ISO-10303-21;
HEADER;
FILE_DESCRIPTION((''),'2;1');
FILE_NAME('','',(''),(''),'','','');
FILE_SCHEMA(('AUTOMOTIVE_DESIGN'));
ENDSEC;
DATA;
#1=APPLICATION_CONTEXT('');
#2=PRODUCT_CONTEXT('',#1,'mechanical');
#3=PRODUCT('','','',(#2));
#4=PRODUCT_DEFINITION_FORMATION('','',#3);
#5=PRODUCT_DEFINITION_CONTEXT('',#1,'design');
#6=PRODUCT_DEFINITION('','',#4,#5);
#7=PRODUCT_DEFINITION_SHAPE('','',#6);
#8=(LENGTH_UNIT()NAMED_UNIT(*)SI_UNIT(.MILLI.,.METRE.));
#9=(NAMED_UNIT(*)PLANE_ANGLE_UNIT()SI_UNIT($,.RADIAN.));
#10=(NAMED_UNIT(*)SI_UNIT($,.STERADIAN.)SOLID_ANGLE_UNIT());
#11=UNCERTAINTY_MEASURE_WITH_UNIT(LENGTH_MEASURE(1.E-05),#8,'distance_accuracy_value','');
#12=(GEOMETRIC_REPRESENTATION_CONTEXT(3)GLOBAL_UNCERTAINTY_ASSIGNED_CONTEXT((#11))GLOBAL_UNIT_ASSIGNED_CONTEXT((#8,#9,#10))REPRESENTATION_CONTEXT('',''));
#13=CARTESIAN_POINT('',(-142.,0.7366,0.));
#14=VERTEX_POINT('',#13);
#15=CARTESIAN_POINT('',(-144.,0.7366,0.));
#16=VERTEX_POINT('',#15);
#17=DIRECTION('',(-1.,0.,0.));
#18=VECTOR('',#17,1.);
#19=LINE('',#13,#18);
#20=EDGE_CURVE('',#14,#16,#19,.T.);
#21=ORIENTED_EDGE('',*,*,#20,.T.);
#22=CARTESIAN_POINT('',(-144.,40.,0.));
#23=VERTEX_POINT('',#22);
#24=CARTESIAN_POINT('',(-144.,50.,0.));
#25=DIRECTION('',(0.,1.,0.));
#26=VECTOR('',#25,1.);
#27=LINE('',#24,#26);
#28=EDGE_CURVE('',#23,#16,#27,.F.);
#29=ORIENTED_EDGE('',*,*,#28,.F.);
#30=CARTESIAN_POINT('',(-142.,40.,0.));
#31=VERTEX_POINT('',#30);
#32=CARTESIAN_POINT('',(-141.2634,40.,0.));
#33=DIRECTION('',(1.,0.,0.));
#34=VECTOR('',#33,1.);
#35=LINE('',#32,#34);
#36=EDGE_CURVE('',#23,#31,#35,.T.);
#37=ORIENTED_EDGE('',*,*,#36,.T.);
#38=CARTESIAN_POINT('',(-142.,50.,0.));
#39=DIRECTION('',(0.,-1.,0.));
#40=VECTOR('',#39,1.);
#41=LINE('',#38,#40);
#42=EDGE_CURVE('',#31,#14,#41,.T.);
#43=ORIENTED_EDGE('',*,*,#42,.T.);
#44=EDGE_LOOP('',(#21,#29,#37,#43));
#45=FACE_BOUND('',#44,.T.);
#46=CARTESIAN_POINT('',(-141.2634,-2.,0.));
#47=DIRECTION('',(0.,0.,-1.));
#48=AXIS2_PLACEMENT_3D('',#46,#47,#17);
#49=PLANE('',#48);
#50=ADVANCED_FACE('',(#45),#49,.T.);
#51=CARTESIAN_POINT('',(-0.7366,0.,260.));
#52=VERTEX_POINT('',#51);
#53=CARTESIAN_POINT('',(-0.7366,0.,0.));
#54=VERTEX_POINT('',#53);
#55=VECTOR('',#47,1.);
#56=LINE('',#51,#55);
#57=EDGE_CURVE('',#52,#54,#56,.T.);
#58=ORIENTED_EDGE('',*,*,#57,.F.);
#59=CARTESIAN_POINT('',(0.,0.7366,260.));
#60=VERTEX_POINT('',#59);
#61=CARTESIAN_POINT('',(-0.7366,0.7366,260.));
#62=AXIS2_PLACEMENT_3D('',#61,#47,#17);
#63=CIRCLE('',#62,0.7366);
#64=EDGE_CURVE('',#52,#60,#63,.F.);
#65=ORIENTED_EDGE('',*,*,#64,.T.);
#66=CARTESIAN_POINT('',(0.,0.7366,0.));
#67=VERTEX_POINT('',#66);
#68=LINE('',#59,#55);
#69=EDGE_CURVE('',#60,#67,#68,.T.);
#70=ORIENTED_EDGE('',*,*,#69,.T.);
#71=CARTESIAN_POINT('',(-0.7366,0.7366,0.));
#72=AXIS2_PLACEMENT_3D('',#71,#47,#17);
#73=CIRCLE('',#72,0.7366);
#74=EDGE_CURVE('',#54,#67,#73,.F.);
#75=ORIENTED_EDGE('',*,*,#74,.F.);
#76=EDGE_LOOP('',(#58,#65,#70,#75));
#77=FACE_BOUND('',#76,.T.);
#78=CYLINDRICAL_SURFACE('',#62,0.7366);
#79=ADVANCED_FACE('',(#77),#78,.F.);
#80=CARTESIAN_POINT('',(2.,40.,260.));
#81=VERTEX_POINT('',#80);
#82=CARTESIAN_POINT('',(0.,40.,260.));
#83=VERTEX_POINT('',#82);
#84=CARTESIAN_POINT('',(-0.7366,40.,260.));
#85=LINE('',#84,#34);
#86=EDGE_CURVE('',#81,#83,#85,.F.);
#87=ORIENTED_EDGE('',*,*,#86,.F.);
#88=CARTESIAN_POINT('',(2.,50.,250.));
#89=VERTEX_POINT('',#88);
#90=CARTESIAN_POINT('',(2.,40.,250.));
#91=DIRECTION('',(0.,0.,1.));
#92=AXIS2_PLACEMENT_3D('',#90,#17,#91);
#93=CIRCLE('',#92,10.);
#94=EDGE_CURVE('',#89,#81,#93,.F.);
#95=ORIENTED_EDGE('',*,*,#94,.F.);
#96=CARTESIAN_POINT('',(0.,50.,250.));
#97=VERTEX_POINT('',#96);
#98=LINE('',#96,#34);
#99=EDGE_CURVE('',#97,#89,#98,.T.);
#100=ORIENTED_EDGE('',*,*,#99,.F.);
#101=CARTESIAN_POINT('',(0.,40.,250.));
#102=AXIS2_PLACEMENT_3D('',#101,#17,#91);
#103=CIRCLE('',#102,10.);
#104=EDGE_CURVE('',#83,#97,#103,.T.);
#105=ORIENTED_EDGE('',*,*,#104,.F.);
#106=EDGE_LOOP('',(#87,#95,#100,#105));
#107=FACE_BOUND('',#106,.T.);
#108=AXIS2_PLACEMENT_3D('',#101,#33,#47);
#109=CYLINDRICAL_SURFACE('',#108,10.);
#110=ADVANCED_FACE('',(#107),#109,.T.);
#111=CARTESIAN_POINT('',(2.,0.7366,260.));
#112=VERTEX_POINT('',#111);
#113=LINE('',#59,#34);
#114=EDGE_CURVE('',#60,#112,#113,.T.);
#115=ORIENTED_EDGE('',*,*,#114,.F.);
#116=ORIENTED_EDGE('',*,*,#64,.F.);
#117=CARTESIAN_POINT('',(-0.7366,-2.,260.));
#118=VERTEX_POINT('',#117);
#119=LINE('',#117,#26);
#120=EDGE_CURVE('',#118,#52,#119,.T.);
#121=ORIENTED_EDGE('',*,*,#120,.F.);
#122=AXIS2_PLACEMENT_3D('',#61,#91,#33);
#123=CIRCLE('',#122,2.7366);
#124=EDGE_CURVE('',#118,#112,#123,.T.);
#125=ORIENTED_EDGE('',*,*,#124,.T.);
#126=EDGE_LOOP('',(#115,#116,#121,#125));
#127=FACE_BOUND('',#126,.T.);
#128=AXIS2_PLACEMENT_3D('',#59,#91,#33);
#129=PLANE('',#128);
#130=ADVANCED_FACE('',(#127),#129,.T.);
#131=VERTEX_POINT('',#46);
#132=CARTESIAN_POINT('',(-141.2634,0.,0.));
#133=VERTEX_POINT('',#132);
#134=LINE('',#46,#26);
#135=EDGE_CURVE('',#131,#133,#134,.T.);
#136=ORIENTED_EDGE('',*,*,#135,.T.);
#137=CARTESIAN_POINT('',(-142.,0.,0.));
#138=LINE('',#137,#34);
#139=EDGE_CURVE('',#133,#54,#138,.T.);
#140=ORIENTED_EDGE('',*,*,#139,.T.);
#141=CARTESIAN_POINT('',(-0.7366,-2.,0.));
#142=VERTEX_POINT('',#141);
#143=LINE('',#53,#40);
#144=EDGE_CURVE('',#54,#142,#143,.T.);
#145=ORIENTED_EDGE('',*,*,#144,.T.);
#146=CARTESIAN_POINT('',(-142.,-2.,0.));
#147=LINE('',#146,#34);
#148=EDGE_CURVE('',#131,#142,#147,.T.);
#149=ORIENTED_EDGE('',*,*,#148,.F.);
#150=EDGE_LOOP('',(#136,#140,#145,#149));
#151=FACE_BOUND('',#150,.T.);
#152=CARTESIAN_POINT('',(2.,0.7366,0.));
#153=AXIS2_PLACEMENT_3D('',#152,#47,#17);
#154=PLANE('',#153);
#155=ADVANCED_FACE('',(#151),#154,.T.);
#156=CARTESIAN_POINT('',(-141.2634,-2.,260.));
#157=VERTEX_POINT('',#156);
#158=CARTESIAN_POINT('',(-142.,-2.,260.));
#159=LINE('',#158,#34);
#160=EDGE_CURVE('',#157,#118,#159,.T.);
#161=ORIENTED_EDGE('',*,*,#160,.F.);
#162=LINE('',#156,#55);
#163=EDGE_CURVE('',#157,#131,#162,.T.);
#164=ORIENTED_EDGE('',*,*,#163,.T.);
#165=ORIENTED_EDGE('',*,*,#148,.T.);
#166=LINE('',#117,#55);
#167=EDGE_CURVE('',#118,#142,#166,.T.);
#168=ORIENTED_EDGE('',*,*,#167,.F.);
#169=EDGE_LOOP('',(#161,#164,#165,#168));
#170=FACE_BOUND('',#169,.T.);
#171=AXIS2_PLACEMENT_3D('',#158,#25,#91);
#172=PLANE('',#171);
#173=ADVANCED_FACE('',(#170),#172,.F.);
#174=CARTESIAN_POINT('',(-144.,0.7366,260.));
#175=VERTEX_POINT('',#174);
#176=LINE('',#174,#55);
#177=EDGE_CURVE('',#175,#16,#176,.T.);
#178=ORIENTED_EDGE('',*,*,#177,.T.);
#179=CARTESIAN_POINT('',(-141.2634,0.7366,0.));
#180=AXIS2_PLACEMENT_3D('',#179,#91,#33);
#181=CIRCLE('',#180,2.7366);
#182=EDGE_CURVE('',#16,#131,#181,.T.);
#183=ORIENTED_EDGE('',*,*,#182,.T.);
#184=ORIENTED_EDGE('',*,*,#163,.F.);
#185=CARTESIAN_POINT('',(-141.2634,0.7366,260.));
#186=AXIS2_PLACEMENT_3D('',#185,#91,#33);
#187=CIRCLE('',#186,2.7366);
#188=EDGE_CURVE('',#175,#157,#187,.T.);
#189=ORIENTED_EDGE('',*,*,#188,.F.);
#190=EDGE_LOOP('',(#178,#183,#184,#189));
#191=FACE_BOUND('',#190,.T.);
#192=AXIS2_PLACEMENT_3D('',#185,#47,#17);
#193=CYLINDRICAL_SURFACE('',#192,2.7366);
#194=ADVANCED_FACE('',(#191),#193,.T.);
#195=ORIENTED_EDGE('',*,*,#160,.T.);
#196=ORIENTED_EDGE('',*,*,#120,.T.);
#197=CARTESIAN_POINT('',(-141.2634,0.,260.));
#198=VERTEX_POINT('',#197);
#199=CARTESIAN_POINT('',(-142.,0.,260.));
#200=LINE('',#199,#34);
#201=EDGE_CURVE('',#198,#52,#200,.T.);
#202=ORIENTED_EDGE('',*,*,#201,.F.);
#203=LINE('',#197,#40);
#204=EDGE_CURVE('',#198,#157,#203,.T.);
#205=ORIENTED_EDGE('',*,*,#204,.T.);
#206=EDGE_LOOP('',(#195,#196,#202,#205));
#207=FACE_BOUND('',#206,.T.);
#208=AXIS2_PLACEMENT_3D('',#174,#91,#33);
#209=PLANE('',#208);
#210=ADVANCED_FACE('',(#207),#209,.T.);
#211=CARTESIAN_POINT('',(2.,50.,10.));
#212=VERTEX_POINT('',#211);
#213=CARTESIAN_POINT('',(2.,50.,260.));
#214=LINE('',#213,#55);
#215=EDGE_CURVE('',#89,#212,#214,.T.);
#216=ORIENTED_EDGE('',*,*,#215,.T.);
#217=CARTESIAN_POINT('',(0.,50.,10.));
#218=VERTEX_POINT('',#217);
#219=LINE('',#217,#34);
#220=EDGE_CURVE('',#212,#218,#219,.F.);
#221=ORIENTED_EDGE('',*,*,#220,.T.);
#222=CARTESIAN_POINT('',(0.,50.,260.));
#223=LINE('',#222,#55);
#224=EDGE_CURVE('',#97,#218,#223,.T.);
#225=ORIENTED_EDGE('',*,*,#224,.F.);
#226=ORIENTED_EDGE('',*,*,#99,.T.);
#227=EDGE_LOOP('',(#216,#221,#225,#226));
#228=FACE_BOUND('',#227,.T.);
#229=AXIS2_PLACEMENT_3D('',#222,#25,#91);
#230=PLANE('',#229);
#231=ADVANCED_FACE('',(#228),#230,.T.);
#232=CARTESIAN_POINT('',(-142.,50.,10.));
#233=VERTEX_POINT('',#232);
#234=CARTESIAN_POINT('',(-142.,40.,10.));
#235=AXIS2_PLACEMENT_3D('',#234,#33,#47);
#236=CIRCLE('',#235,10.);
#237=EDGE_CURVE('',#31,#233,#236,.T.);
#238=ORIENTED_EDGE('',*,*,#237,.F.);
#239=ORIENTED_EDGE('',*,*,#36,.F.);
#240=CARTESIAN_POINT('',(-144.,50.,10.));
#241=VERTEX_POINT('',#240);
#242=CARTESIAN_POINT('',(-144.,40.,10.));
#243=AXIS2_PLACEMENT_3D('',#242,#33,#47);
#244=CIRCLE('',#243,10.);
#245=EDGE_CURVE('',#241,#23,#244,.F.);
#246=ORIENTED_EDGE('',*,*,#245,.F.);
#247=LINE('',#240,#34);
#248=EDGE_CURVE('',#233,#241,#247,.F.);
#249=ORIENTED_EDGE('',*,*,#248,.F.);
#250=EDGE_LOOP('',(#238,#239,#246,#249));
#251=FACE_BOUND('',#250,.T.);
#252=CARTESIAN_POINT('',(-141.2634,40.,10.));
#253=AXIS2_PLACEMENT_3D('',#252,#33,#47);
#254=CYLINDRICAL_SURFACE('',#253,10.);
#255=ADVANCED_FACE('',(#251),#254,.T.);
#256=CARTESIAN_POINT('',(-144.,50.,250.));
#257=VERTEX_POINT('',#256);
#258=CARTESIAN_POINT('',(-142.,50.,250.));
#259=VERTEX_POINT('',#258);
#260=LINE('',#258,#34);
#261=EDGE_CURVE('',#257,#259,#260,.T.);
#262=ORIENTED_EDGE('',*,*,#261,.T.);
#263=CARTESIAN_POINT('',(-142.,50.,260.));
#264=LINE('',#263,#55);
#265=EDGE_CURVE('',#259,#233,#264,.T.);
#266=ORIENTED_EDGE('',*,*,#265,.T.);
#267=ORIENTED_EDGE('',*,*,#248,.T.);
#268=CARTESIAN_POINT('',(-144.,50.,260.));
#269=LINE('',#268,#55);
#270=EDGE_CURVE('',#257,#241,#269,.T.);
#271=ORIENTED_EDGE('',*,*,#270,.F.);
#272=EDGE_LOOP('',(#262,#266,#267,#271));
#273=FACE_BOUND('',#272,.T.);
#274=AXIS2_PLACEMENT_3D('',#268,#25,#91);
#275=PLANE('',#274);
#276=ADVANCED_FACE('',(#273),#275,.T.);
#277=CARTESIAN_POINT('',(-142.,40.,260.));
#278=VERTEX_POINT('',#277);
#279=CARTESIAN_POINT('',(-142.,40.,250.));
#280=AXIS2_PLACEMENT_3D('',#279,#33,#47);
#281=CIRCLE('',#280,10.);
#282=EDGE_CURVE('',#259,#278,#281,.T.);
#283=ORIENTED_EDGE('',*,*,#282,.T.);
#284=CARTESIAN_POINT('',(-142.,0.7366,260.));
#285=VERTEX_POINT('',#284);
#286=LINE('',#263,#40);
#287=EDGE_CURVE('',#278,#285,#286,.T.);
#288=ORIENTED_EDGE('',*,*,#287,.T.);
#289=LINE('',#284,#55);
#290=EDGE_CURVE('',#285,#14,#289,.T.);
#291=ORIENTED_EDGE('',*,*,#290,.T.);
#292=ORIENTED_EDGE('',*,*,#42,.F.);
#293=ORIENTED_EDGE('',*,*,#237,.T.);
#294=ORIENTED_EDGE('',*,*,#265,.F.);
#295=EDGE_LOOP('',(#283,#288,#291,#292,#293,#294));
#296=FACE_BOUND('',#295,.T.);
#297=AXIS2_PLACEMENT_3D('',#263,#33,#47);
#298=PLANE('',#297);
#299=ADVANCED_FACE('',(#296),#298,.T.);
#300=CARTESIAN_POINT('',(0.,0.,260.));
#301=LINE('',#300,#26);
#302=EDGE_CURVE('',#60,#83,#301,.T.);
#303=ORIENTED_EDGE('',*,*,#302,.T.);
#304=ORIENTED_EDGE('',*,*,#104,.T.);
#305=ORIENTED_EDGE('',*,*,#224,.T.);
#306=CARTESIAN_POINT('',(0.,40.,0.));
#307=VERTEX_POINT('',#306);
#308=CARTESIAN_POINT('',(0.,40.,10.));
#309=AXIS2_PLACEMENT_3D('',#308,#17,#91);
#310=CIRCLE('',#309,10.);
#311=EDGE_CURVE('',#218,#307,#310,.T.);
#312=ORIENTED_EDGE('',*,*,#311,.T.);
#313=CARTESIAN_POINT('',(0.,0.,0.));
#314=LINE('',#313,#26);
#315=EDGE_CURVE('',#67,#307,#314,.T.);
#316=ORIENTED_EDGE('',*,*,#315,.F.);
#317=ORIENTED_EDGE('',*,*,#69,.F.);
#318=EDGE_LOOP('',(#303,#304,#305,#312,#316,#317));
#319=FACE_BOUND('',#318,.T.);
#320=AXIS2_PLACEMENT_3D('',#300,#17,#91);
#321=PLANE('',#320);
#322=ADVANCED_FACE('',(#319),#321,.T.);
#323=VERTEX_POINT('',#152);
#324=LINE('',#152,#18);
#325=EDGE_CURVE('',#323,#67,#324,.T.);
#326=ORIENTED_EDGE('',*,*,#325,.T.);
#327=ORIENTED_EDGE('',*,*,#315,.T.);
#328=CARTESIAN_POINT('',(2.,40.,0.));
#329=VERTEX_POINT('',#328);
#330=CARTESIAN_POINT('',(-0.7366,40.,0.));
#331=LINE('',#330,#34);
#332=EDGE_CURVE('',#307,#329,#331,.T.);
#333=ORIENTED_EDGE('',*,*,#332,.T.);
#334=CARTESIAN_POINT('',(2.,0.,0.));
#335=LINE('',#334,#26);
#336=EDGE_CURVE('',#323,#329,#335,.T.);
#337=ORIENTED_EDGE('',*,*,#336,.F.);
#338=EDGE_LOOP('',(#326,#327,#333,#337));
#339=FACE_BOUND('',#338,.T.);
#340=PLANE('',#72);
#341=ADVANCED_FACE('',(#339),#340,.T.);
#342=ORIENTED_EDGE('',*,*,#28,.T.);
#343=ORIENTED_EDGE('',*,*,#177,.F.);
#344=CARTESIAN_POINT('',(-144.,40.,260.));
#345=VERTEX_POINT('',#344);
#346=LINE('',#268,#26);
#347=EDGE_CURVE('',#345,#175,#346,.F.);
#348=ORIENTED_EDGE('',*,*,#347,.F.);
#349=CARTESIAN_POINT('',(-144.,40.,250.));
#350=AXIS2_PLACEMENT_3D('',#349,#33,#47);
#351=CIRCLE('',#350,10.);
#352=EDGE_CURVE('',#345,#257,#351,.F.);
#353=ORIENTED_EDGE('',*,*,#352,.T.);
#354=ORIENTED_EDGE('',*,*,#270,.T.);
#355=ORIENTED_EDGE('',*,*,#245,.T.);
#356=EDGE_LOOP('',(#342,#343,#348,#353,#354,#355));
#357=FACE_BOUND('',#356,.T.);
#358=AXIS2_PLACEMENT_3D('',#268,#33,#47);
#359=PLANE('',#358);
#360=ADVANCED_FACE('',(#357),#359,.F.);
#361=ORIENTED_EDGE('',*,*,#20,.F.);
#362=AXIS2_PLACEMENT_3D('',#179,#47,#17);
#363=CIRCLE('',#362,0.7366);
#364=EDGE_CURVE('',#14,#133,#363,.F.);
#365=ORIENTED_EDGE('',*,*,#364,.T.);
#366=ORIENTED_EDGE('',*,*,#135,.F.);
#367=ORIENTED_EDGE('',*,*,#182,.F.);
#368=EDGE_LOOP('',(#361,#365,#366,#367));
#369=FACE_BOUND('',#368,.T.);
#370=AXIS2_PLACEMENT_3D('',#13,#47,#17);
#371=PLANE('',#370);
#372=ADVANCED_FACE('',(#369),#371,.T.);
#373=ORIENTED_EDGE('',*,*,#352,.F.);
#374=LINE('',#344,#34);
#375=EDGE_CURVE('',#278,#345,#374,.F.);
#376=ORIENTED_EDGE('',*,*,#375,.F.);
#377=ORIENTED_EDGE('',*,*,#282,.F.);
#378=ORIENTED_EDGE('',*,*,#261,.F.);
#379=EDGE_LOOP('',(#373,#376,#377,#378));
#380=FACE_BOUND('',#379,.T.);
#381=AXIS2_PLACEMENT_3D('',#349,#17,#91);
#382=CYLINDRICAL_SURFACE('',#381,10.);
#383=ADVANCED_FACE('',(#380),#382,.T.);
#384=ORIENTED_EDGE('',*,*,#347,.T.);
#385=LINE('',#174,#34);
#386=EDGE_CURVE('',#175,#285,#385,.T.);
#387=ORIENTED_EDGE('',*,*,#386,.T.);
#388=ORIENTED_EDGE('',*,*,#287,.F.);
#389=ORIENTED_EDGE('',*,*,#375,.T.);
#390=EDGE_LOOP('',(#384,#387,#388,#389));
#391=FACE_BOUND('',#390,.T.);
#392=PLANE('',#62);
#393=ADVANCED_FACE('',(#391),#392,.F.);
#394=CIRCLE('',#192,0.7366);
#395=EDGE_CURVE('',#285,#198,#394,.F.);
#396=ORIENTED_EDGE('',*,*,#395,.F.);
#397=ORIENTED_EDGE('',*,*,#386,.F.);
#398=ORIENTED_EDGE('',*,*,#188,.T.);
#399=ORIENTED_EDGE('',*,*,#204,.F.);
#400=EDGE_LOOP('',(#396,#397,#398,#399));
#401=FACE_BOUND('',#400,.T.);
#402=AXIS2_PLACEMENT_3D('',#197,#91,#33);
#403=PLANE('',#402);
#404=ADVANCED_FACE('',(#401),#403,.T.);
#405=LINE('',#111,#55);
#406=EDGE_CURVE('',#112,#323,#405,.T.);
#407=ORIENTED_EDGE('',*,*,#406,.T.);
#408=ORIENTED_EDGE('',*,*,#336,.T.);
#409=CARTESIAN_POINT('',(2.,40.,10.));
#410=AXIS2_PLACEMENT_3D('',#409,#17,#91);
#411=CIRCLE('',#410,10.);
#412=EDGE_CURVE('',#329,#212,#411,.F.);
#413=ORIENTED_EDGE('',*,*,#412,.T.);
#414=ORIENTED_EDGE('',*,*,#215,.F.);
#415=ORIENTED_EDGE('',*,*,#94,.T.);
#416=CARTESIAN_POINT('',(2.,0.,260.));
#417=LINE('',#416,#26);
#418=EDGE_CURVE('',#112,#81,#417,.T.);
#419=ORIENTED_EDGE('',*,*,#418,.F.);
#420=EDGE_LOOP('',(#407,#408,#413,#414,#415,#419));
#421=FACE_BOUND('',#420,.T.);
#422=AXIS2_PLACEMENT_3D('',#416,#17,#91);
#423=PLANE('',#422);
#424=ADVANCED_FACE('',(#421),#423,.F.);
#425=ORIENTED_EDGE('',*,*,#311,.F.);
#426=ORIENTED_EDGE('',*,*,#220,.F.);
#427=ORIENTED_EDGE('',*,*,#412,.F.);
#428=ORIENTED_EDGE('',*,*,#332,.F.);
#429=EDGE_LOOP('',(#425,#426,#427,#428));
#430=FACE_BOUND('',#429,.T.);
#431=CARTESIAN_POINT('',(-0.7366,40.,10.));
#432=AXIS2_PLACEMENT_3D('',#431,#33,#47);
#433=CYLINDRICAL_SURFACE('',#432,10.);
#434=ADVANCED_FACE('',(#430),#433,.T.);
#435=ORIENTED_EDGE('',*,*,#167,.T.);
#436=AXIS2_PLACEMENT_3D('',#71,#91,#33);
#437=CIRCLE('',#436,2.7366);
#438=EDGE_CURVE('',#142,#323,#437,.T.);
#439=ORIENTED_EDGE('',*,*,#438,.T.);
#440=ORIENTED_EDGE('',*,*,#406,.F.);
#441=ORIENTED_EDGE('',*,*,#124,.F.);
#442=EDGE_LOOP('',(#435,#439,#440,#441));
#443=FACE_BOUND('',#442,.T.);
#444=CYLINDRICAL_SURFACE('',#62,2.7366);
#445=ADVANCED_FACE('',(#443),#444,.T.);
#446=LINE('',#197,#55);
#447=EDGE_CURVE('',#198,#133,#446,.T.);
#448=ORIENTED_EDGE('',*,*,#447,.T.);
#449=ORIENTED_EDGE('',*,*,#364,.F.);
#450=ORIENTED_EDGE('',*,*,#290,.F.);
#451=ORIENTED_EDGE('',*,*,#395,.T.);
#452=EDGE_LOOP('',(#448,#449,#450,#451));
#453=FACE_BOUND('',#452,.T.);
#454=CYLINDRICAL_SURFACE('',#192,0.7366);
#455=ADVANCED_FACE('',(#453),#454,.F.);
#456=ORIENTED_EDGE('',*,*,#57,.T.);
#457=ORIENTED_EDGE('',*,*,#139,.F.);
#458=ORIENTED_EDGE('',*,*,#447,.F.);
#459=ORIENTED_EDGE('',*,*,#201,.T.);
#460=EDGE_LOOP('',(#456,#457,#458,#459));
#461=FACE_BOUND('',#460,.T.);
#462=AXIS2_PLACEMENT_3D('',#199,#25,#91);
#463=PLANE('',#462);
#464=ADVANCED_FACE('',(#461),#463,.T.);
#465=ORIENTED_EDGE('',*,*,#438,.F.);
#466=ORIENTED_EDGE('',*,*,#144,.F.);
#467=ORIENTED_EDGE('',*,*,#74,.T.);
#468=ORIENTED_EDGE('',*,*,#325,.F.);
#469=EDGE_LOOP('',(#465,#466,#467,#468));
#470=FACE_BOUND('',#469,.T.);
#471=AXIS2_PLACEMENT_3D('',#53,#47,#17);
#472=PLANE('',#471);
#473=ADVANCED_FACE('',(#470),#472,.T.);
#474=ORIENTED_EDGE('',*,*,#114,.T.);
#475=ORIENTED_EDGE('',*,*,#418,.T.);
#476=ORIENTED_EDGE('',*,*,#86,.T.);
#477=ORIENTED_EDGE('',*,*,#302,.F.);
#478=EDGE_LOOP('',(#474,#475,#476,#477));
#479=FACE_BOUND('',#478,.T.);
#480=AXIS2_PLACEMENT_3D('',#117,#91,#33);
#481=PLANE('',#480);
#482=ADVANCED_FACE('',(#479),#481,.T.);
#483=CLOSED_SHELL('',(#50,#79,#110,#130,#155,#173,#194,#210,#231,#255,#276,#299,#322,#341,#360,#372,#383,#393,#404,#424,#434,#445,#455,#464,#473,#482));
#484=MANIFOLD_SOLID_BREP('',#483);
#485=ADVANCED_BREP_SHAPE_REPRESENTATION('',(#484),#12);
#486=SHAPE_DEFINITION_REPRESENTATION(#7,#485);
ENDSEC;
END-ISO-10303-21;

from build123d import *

# Parameters (mm, degrees)
BASIS_BLECH1_DEPTH = 260
VERRUNDUNG1_R      = 10


# Sheet-metal steps are written as plain solids
with BuildPart() as part:
    # Skizze1 → Basis-Blech1 (new body)
    with BuildSketch(Plane.XY):
        with BuildLine():
            Line((-142, 50), (-142, 0.7366))
            ThreePointArc((-142, 0.7366), (-141.784254855, 0.215745145), (-141.2634, 0))
            Line((-141.2634, 0), (-0.7366, 0))
            ThreePointArc((-0.7366, 0), (-0.215745145, 0.215745145), (0, 0.7366))
            Line((0, 0.7366), (0, 50))
            Line((0, 50), (2, 50))
            Line((2, 50), (2, 0.7366))
            ThreePointArc((2, 0.7366), (1.198468417, -1.198468417), (-0.7366, -2))
            Line((-0.7366, -2), (-141.2634, -2))
            ThreePointArc((-141.2634, -2), (-143.198468417, -1.198468417), (-144, 0.7366))
            Line((-144, 0.7366), (-144, 50))
            Line((-144, 50), (-142, 50))
        make_face()
    extrude(amount=BASIS_BLECH1_DEPTH)

    # Verrundung1
    verrundung1_edges = [part.edges().sort_by_distance(p)[0] for p in [
        (-143, 50, 0),
        (1, 50, 0),
        (-143, 50, 260),
        (1, 50, 260),
    ]]
    fillet(verrundung1_edges, radius=VERRUNDUNG1_R)


solid = part.part
